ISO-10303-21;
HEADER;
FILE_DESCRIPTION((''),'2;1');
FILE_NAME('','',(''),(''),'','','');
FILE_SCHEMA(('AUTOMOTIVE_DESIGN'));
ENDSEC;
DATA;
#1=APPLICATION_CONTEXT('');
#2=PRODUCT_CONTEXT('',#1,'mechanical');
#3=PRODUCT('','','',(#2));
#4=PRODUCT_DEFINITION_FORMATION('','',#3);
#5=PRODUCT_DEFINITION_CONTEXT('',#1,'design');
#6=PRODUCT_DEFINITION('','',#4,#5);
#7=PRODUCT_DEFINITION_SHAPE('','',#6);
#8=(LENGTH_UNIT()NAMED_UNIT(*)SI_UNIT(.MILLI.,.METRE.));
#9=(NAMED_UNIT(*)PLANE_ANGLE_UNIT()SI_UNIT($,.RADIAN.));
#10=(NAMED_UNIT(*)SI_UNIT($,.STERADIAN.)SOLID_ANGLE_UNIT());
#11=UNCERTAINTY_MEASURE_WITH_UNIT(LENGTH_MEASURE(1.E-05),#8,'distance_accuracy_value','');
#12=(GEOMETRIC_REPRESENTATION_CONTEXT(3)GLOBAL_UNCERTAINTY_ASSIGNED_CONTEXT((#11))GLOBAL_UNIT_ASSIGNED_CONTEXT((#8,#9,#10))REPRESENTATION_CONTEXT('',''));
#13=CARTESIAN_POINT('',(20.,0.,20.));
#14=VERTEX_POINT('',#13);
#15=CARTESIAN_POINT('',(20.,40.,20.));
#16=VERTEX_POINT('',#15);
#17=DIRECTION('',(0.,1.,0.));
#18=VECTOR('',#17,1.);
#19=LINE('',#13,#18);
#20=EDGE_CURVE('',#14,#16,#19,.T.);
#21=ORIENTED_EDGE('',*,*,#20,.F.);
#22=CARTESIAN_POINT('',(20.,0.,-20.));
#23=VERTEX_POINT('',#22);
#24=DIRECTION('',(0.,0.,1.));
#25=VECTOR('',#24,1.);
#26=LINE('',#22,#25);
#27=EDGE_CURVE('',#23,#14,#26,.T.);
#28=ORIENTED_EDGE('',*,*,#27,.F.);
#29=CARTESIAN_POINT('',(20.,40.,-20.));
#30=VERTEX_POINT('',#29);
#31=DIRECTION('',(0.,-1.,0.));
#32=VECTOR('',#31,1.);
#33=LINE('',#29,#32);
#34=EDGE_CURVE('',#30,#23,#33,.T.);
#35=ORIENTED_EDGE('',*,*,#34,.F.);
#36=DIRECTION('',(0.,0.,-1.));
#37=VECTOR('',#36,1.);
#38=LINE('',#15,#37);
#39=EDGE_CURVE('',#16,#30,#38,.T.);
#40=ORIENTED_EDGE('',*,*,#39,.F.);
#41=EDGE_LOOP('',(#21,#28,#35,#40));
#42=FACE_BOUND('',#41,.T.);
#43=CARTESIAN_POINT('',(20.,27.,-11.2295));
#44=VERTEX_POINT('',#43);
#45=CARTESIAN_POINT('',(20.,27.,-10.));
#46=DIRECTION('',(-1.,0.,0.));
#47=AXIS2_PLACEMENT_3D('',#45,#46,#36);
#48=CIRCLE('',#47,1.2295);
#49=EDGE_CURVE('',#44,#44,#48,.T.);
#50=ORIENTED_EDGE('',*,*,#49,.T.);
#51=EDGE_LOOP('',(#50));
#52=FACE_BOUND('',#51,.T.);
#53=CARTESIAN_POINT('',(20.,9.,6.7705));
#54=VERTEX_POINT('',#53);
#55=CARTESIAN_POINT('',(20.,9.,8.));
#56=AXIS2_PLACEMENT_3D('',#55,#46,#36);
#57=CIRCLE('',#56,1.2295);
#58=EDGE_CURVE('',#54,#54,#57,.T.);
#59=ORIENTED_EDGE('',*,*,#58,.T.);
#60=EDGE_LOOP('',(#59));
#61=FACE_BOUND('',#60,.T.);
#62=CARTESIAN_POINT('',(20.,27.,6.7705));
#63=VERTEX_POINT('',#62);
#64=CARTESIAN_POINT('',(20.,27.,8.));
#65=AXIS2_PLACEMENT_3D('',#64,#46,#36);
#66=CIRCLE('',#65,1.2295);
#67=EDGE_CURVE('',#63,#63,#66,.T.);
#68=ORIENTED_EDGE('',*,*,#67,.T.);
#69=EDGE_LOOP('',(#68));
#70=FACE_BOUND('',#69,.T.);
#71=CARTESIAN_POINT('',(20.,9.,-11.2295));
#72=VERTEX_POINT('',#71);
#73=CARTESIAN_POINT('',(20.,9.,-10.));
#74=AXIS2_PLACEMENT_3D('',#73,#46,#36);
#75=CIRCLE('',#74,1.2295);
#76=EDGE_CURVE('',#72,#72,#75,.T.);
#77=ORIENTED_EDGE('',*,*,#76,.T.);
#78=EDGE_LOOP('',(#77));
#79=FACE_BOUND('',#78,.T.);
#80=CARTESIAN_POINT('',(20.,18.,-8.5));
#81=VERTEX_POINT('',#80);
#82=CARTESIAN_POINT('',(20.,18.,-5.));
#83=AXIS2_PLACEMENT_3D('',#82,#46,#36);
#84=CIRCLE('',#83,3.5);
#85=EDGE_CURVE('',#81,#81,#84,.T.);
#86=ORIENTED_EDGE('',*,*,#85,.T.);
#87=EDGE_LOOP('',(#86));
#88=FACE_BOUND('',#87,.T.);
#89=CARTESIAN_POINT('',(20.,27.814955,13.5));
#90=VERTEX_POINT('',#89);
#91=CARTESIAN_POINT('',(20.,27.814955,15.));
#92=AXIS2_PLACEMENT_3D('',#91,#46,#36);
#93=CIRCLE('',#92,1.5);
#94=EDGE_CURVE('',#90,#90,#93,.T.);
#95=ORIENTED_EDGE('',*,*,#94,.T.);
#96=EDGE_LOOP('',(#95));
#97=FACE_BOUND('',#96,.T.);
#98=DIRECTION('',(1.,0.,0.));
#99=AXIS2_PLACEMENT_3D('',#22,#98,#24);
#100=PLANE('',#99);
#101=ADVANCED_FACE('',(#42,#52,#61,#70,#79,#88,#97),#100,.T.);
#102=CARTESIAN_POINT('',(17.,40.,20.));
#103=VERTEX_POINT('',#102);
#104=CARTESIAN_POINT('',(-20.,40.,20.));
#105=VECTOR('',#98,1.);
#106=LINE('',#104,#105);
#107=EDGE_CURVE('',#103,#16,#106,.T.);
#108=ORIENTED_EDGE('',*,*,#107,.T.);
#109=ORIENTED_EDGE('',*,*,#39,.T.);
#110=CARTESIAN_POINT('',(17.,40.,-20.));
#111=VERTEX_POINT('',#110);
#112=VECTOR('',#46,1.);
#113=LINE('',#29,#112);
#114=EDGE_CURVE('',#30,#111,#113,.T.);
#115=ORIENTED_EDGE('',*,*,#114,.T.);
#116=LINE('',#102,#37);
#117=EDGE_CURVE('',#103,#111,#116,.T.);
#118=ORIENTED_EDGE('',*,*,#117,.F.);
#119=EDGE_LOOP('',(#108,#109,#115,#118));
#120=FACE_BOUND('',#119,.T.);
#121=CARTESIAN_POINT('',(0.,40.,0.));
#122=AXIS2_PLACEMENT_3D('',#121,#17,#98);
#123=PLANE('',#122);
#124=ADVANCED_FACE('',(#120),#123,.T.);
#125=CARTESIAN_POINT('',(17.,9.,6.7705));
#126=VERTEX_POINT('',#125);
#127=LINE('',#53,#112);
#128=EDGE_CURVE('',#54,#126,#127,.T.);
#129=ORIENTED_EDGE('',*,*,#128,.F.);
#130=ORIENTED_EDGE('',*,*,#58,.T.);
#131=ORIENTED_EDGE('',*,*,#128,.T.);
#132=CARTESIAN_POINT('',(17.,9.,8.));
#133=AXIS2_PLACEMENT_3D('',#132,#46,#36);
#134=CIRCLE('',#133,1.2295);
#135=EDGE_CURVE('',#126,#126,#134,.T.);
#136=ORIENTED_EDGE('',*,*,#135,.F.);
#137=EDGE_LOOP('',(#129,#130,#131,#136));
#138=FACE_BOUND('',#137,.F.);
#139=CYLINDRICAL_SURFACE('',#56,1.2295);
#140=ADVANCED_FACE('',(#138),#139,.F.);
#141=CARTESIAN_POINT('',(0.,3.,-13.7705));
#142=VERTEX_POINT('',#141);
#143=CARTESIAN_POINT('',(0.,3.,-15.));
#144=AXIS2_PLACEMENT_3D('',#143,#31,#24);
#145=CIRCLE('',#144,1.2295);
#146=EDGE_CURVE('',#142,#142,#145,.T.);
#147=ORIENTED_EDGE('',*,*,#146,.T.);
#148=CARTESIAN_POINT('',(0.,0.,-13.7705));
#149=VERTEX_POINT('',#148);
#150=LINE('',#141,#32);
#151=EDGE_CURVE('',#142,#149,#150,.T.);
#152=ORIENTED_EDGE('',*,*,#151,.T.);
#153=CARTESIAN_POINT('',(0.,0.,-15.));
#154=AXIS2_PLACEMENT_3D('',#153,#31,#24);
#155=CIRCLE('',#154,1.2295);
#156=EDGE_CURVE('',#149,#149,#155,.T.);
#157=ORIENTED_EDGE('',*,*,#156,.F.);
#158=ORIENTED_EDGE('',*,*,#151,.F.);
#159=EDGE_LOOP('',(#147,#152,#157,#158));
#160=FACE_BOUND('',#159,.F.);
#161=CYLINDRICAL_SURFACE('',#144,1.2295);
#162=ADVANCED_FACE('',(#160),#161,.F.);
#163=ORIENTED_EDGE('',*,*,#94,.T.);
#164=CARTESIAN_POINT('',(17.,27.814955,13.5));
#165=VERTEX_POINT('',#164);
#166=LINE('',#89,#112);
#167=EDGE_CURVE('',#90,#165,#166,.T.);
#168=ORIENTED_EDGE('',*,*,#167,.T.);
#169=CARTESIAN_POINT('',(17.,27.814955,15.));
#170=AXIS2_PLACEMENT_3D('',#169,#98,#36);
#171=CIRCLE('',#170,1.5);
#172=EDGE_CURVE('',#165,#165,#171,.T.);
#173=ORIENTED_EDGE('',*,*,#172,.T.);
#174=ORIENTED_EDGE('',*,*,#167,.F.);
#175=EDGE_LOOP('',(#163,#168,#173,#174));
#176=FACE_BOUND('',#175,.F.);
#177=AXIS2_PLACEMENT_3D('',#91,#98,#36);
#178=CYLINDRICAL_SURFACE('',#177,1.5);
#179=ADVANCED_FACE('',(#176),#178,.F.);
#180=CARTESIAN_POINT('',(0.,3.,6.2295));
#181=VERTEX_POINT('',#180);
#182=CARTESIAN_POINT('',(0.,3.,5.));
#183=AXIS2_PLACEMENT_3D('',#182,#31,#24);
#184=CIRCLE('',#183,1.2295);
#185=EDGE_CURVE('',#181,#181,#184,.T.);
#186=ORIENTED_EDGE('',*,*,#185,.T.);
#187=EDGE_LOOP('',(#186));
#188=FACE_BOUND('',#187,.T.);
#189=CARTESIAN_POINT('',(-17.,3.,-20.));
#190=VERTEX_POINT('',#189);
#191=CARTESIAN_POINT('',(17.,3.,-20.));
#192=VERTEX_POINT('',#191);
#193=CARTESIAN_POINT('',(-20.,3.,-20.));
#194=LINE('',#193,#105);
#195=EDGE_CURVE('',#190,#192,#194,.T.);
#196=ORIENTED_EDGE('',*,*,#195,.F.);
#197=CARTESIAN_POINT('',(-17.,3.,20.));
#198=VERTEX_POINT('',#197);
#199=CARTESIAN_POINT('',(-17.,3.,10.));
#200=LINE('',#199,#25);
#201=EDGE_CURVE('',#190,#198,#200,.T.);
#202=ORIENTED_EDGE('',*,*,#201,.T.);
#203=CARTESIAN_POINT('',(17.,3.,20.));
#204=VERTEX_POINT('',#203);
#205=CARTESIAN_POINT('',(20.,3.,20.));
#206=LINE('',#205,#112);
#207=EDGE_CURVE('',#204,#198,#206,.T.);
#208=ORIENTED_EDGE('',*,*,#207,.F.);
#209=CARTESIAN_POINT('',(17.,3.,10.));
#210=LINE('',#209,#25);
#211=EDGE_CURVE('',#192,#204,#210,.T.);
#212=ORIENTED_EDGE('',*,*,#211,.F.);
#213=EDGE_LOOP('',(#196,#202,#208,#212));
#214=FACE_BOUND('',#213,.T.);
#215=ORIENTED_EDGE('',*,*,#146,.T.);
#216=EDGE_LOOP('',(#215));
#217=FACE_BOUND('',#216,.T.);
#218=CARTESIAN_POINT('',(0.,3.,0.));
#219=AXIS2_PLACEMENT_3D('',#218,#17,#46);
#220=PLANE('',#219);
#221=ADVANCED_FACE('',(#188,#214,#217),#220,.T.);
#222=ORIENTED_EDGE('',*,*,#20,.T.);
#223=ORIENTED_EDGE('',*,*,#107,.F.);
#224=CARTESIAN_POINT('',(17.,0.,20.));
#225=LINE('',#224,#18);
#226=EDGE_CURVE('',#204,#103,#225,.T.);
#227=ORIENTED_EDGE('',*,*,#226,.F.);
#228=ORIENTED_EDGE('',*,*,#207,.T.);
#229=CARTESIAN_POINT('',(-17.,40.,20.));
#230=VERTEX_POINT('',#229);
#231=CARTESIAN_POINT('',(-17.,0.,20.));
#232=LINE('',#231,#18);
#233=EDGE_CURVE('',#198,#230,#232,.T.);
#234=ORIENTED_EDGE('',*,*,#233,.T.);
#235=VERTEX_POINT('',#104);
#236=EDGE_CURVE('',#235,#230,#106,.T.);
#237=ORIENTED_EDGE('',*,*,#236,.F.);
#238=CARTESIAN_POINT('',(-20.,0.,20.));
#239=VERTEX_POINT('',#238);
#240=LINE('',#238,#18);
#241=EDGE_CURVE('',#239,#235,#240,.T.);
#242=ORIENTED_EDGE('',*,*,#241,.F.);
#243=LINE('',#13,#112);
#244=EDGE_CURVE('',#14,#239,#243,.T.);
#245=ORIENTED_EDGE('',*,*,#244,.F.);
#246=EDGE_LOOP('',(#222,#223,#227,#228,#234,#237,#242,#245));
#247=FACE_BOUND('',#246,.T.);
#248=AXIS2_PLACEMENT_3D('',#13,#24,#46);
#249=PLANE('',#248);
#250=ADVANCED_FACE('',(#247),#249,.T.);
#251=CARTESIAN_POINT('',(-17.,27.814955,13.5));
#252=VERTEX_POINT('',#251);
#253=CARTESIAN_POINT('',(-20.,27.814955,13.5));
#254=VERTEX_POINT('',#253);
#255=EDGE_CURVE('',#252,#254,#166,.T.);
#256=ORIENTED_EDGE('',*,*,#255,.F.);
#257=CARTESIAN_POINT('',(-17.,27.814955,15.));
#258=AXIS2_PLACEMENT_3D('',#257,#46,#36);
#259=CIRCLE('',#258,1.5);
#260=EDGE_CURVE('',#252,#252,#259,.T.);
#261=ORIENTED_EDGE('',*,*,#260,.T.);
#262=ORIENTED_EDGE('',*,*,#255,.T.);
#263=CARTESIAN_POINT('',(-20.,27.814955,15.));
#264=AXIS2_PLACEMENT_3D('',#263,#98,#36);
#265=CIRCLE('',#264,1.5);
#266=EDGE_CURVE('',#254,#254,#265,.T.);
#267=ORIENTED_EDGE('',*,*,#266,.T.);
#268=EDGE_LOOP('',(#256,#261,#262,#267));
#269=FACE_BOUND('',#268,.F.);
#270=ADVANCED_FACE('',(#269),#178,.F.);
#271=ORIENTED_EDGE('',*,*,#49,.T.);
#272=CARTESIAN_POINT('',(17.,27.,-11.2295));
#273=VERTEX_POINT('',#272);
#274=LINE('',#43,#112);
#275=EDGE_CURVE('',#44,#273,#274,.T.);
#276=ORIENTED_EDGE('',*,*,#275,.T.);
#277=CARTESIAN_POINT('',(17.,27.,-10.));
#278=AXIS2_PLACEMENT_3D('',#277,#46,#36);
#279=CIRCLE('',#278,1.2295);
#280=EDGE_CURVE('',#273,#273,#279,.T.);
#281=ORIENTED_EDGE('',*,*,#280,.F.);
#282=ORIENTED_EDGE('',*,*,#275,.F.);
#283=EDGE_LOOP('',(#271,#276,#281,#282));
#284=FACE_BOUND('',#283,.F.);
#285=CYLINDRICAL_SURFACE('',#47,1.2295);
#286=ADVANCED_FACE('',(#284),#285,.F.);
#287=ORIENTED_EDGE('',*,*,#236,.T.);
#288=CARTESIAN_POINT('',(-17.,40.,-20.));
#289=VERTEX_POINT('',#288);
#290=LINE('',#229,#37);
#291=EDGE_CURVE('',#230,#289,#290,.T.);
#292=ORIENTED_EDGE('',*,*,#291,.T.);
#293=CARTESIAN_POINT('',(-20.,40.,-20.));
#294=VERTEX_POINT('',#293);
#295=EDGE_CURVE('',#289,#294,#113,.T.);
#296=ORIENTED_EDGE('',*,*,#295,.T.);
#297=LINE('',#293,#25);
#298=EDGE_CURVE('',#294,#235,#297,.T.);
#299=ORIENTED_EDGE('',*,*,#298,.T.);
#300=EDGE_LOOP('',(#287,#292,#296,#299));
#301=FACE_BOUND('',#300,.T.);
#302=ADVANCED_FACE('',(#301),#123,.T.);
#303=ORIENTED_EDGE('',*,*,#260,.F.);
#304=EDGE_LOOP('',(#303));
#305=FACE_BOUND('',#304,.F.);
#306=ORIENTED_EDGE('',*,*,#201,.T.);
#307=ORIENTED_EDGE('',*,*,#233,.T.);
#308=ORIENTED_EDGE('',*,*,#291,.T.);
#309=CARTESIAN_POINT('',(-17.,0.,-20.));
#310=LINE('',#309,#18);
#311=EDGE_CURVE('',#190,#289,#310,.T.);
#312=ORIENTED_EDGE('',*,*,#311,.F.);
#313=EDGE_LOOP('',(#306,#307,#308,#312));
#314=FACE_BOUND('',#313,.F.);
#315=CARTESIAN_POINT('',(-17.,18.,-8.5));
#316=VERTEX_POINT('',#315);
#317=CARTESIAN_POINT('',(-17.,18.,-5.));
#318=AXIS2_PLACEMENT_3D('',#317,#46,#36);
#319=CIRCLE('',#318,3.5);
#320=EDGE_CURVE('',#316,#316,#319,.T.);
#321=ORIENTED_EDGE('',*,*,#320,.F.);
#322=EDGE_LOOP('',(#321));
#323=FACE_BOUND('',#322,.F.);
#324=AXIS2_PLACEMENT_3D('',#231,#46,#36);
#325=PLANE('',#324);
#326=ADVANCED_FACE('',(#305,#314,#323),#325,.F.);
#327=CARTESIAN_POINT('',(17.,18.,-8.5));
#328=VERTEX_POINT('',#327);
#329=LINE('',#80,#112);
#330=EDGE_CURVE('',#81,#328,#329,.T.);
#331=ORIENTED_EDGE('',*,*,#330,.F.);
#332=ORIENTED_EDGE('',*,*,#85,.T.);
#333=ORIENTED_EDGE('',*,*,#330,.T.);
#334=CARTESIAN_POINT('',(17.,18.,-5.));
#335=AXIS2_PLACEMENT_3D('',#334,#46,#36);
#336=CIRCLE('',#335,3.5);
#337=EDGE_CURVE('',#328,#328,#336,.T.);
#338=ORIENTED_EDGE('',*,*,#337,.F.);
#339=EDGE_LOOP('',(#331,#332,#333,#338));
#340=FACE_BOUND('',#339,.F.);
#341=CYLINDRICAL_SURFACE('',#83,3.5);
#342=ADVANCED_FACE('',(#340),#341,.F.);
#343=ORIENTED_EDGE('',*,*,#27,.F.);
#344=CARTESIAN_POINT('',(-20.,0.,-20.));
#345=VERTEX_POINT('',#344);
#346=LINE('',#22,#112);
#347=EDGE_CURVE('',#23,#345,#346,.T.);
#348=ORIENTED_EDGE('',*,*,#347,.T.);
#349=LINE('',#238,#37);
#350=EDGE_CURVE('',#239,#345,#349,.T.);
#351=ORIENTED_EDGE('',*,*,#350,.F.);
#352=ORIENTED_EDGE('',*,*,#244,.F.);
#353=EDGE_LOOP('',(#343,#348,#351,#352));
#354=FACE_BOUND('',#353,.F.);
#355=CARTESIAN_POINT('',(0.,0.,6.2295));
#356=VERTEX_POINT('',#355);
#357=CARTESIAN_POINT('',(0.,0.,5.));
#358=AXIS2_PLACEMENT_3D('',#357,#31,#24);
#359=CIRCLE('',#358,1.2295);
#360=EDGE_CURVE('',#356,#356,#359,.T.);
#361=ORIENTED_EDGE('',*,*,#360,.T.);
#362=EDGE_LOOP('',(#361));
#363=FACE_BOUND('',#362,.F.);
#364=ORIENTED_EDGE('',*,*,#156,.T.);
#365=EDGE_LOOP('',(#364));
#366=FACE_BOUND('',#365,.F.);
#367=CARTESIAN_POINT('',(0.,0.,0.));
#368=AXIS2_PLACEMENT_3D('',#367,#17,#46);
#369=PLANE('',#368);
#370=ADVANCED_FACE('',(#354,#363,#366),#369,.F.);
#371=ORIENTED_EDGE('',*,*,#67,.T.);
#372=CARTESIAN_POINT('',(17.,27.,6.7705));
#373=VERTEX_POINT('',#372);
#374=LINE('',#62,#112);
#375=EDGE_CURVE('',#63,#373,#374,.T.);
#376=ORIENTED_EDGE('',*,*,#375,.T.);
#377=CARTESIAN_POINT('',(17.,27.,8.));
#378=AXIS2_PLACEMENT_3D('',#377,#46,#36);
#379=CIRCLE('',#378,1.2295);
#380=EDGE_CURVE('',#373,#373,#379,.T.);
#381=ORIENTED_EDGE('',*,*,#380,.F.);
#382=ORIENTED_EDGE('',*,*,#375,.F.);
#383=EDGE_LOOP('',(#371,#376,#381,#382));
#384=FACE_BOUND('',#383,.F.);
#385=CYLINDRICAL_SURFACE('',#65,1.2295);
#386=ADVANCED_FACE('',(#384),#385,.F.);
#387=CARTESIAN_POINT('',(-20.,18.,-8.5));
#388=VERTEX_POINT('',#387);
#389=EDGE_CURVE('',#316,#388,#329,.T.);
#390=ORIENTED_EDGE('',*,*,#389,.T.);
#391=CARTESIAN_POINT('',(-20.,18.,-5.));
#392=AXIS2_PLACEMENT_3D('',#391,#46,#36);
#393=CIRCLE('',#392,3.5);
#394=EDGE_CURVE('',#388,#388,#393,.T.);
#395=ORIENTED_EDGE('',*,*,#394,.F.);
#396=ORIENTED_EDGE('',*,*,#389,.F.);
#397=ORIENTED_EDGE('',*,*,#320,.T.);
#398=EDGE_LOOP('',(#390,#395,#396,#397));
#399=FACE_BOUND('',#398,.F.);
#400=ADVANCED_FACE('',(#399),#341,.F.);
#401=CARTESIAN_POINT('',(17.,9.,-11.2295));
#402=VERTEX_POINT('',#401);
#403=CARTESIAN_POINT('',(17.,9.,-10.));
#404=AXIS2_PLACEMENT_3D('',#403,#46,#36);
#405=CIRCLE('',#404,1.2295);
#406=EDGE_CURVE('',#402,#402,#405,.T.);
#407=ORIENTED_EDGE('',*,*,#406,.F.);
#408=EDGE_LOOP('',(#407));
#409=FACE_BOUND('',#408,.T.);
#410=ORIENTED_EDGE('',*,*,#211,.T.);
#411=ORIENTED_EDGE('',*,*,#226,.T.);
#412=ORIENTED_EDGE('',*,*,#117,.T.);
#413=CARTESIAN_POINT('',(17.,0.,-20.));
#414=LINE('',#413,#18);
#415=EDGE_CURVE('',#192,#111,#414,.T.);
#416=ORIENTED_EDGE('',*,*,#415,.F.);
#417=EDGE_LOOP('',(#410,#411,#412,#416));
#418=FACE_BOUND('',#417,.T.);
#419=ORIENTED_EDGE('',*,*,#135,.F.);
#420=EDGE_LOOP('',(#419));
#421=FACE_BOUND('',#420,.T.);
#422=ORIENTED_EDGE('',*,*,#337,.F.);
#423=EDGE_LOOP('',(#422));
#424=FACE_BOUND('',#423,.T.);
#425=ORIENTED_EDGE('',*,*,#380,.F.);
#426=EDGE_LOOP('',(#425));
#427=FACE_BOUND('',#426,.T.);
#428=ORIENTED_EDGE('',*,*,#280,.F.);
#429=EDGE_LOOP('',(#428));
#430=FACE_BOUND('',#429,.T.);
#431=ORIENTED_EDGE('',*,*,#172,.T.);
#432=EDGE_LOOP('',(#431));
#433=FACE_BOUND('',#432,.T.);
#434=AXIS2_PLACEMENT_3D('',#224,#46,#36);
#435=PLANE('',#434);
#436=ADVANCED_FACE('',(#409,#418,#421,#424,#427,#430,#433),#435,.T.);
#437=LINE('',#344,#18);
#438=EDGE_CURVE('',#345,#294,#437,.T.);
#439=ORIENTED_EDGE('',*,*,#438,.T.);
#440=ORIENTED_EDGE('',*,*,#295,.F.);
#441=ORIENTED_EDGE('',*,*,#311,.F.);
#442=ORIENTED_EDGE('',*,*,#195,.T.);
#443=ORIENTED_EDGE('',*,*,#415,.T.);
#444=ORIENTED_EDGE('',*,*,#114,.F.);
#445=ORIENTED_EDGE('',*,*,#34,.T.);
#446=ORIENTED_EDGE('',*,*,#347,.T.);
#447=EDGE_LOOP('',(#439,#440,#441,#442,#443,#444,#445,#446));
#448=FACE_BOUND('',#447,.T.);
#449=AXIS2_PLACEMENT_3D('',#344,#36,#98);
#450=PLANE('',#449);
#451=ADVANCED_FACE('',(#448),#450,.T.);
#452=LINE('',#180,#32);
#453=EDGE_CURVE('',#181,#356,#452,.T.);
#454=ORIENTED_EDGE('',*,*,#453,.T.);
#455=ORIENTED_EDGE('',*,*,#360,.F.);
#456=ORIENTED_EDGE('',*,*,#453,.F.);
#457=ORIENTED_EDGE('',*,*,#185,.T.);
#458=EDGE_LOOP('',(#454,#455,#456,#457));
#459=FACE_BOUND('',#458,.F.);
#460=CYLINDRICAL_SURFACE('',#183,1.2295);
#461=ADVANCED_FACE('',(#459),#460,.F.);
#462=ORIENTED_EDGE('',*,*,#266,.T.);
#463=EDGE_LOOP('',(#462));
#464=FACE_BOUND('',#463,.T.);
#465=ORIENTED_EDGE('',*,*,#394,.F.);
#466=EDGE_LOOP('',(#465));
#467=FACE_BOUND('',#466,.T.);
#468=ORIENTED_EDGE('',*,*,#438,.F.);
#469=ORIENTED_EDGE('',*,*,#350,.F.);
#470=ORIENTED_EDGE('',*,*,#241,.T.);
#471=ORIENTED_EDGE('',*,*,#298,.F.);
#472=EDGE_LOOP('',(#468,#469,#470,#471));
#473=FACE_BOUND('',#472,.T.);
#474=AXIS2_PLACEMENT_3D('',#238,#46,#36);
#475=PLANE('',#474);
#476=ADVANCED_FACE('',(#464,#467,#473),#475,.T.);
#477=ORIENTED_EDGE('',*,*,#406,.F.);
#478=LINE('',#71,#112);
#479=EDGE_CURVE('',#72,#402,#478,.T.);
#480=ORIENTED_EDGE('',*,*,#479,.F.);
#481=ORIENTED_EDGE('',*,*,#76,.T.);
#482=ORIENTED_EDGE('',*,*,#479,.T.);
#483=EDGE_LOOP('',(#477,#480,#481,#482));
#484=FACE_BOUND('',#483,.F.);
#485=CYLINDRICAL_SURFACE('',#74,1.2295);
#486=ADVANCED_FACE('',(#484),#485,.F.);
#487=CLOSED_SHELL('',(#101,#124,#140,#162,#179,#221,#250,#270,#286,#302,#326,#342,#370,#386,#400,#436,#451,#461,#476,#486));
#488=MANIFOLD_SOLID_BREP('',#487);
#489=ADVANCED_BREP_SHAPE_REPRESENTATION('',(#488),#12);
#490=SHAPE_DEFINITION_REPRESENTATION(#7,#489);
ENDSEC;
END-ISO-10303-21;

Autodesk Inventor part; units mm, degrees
ref_plane "YZ Plane" through (0, 0, 0) normal (1, 0, 0) x (0, 1, 0)
ref_plane "XZ Plane" through (0, 0, 0) normal (0, 1, 0) x (-1, 0, 0)
ref_plane "XY Plane" through (0, 0, 0) normal (0, 0, 1) x (1, 0, 0)
sketch "スケッチ1" plane through (0, 0, 0) normal (0, 1, 0) x (-1, 0, 0)
  line L0 (20, -20) -> (-20, -20)
  line L1 (-20, -20) -> (-20, 20)
  line L2 (-20, 20) -> (20, 20)
  line L3 (20, 20) -> (20, -20)
  line L4 (-20, 20) -> (20, -20) construction
  line L5 (-20, -20) -> (20, 20) construction
  point P0 (0, 0)
  point P1 (0, 0)
  dimension "d0" = 40
  dimension "d1" = 40
extrude "押し出し1" add sketch "スケッチ1" along normal blind 3
sketch "スケッチ2" plane through (0, 3, 0) normal (0, 1, 0) x (1, 0, 0)
  line L0 (-20, -20) -> (20, -20) projected
  line L1 (20, -20) -> (20, 20) projected
  line L2 (20, 20) -> (-20, 20) projected
  line L3 (-20, 20) -> (-20, -20) projected
  line L4 (-20, -20) -> (20, -20) projected
  line L5 (-20, -20) -> (-17, -20)
  line L6 (-17, -20) -> (-17, 20)
  line L7 (-17, 20) -> (-20, 20)
  line L8 (-20, 20) -> (-20, -20)
  line L9 (20, -20) -> (20, 20) projected
  line L10 (20, -20) -> (17, -20)
  line L11 (17, -20) -> (17, 20)
  line L12 (17, 20) -> (20, 20)
  line L13 (20, 20) -> (20, -20)
  line L14 (20, 20) -> (-20, 20) projected
  point P0 (0, 0)
  point P1 (-17, 20)
  dimension "d4" = 3
  dimension "d5" = 3
extrude "押し出し2" add sketch "スケッチ2" along normal blind 40 from surface at -3 contours L3 L2 L6 L0 | L11 L2 L1 L0
sketch "スケッチ3" plane through (20, 0, 20) normal (1, 0, 0) x (0, 0, -1)
  line L0 (0, 3) -> (40, 3)
  line L1 (25, 18) -> (40, 18) construction
  line L2 (40, 40) -> (40, 3) construction
  line L3 (25, 18) -> (-0.078171, 18) construction
  point P0 (20, 0)
  dimension "d8" = 15
  dimension "d50" = 15
hole "穴1" at (20, 18, -5) direction (-1, 0, 0) diameter 7 end through all
sketch "スケッチ5" plane through (20, 0, 20) normal (1, 0, 0) x (0, 0, -1)
  line L0 (0, 0) -> (0, 40) projected
  line L1 (0, 0) -> (40, 0) projected
  line L2 (36, 33) -> (6, 33)
  line L3 (6, 33) -> (6, 3)
  line L4 (6, 3) -> (36, 3)
  line L5 (36, 3) -> (36, 33)
  line L6 (36, 33) -> (6, 3) construction
  line L7 (36, 3) -> (6, 33) construction
  line L8 (36, 18) -> (6, 18)
  circle A0 centre (25, 18) radius 3.5 projected
  point P0 (20, 0)
  point P1 (21, 18)
  point P2 (30, 27)
  point P3 (12, 27)
  point P4 (21, 18)
  point P5 (12, 9)
  point P6 (21, 18)
  point P7 (30, 9)
  point P8 (21, 18)
  point P9 (30, 27)
  dimension "d20" = 30
  dimension "d21" = 30
  dimension "d23" = 6
  dimension "d24" = 6
  dimension "d27" = 360
  dimension "d40" = 4
hole "穴2" at (20, 27, -10) at (20, 9, -10) at (20, 27, 8) at (20, 9, 8) direction (-1, 0, 0) diameter 2.459 depth 3 thread size "M3x0.5" class "6H" standard "ISO Metric profile"
sketch "スケッチ6" plane through (0, 3, 0) normal (0, 1, 0) x (1, 0, 0)
  line L0 (17, 20) -> (-17, 20) projected
  point P0 (0, 0)
  point P1 (0, 15)
  point P2 (0, -5)
  point P3 (0, 20)
  dimension "d41" = 5
  dimension "d42" = 20
hole "穴3" at (0, 3, -15) at (0, 3, 5) direction (0, -1, 0) diameter 2.459 depth 3 thread size "M3x0.5" class "6H" standard "ISO Metric profile"
sketch "スケッチ7" plane through (20, 0, 20) normal (1, 0, 0) x (0, 0, -1)
  circle A0 centre (25, 18) radius 3.5
  line L0 (25, 18) -> (-12.331112, 18)
  line L1 (-6.275173, 36.05673) -> (25, 18)
  circle A1 centre (5, 27.814955) radius 1.5
  line L2 (0, 0) -> (0, 40)
  point P0 (20, 0)
  dimension "d51" = 30
  dimension "d52" = 3
  dimension "d53" = 5
extrude "押し出し4" cut sketch "スケッチ7" against normal up to surface (40 mm away) contours A1
equation "\"d54\" = d53"
properties part number "hand" material "アルミニウム 6061"
